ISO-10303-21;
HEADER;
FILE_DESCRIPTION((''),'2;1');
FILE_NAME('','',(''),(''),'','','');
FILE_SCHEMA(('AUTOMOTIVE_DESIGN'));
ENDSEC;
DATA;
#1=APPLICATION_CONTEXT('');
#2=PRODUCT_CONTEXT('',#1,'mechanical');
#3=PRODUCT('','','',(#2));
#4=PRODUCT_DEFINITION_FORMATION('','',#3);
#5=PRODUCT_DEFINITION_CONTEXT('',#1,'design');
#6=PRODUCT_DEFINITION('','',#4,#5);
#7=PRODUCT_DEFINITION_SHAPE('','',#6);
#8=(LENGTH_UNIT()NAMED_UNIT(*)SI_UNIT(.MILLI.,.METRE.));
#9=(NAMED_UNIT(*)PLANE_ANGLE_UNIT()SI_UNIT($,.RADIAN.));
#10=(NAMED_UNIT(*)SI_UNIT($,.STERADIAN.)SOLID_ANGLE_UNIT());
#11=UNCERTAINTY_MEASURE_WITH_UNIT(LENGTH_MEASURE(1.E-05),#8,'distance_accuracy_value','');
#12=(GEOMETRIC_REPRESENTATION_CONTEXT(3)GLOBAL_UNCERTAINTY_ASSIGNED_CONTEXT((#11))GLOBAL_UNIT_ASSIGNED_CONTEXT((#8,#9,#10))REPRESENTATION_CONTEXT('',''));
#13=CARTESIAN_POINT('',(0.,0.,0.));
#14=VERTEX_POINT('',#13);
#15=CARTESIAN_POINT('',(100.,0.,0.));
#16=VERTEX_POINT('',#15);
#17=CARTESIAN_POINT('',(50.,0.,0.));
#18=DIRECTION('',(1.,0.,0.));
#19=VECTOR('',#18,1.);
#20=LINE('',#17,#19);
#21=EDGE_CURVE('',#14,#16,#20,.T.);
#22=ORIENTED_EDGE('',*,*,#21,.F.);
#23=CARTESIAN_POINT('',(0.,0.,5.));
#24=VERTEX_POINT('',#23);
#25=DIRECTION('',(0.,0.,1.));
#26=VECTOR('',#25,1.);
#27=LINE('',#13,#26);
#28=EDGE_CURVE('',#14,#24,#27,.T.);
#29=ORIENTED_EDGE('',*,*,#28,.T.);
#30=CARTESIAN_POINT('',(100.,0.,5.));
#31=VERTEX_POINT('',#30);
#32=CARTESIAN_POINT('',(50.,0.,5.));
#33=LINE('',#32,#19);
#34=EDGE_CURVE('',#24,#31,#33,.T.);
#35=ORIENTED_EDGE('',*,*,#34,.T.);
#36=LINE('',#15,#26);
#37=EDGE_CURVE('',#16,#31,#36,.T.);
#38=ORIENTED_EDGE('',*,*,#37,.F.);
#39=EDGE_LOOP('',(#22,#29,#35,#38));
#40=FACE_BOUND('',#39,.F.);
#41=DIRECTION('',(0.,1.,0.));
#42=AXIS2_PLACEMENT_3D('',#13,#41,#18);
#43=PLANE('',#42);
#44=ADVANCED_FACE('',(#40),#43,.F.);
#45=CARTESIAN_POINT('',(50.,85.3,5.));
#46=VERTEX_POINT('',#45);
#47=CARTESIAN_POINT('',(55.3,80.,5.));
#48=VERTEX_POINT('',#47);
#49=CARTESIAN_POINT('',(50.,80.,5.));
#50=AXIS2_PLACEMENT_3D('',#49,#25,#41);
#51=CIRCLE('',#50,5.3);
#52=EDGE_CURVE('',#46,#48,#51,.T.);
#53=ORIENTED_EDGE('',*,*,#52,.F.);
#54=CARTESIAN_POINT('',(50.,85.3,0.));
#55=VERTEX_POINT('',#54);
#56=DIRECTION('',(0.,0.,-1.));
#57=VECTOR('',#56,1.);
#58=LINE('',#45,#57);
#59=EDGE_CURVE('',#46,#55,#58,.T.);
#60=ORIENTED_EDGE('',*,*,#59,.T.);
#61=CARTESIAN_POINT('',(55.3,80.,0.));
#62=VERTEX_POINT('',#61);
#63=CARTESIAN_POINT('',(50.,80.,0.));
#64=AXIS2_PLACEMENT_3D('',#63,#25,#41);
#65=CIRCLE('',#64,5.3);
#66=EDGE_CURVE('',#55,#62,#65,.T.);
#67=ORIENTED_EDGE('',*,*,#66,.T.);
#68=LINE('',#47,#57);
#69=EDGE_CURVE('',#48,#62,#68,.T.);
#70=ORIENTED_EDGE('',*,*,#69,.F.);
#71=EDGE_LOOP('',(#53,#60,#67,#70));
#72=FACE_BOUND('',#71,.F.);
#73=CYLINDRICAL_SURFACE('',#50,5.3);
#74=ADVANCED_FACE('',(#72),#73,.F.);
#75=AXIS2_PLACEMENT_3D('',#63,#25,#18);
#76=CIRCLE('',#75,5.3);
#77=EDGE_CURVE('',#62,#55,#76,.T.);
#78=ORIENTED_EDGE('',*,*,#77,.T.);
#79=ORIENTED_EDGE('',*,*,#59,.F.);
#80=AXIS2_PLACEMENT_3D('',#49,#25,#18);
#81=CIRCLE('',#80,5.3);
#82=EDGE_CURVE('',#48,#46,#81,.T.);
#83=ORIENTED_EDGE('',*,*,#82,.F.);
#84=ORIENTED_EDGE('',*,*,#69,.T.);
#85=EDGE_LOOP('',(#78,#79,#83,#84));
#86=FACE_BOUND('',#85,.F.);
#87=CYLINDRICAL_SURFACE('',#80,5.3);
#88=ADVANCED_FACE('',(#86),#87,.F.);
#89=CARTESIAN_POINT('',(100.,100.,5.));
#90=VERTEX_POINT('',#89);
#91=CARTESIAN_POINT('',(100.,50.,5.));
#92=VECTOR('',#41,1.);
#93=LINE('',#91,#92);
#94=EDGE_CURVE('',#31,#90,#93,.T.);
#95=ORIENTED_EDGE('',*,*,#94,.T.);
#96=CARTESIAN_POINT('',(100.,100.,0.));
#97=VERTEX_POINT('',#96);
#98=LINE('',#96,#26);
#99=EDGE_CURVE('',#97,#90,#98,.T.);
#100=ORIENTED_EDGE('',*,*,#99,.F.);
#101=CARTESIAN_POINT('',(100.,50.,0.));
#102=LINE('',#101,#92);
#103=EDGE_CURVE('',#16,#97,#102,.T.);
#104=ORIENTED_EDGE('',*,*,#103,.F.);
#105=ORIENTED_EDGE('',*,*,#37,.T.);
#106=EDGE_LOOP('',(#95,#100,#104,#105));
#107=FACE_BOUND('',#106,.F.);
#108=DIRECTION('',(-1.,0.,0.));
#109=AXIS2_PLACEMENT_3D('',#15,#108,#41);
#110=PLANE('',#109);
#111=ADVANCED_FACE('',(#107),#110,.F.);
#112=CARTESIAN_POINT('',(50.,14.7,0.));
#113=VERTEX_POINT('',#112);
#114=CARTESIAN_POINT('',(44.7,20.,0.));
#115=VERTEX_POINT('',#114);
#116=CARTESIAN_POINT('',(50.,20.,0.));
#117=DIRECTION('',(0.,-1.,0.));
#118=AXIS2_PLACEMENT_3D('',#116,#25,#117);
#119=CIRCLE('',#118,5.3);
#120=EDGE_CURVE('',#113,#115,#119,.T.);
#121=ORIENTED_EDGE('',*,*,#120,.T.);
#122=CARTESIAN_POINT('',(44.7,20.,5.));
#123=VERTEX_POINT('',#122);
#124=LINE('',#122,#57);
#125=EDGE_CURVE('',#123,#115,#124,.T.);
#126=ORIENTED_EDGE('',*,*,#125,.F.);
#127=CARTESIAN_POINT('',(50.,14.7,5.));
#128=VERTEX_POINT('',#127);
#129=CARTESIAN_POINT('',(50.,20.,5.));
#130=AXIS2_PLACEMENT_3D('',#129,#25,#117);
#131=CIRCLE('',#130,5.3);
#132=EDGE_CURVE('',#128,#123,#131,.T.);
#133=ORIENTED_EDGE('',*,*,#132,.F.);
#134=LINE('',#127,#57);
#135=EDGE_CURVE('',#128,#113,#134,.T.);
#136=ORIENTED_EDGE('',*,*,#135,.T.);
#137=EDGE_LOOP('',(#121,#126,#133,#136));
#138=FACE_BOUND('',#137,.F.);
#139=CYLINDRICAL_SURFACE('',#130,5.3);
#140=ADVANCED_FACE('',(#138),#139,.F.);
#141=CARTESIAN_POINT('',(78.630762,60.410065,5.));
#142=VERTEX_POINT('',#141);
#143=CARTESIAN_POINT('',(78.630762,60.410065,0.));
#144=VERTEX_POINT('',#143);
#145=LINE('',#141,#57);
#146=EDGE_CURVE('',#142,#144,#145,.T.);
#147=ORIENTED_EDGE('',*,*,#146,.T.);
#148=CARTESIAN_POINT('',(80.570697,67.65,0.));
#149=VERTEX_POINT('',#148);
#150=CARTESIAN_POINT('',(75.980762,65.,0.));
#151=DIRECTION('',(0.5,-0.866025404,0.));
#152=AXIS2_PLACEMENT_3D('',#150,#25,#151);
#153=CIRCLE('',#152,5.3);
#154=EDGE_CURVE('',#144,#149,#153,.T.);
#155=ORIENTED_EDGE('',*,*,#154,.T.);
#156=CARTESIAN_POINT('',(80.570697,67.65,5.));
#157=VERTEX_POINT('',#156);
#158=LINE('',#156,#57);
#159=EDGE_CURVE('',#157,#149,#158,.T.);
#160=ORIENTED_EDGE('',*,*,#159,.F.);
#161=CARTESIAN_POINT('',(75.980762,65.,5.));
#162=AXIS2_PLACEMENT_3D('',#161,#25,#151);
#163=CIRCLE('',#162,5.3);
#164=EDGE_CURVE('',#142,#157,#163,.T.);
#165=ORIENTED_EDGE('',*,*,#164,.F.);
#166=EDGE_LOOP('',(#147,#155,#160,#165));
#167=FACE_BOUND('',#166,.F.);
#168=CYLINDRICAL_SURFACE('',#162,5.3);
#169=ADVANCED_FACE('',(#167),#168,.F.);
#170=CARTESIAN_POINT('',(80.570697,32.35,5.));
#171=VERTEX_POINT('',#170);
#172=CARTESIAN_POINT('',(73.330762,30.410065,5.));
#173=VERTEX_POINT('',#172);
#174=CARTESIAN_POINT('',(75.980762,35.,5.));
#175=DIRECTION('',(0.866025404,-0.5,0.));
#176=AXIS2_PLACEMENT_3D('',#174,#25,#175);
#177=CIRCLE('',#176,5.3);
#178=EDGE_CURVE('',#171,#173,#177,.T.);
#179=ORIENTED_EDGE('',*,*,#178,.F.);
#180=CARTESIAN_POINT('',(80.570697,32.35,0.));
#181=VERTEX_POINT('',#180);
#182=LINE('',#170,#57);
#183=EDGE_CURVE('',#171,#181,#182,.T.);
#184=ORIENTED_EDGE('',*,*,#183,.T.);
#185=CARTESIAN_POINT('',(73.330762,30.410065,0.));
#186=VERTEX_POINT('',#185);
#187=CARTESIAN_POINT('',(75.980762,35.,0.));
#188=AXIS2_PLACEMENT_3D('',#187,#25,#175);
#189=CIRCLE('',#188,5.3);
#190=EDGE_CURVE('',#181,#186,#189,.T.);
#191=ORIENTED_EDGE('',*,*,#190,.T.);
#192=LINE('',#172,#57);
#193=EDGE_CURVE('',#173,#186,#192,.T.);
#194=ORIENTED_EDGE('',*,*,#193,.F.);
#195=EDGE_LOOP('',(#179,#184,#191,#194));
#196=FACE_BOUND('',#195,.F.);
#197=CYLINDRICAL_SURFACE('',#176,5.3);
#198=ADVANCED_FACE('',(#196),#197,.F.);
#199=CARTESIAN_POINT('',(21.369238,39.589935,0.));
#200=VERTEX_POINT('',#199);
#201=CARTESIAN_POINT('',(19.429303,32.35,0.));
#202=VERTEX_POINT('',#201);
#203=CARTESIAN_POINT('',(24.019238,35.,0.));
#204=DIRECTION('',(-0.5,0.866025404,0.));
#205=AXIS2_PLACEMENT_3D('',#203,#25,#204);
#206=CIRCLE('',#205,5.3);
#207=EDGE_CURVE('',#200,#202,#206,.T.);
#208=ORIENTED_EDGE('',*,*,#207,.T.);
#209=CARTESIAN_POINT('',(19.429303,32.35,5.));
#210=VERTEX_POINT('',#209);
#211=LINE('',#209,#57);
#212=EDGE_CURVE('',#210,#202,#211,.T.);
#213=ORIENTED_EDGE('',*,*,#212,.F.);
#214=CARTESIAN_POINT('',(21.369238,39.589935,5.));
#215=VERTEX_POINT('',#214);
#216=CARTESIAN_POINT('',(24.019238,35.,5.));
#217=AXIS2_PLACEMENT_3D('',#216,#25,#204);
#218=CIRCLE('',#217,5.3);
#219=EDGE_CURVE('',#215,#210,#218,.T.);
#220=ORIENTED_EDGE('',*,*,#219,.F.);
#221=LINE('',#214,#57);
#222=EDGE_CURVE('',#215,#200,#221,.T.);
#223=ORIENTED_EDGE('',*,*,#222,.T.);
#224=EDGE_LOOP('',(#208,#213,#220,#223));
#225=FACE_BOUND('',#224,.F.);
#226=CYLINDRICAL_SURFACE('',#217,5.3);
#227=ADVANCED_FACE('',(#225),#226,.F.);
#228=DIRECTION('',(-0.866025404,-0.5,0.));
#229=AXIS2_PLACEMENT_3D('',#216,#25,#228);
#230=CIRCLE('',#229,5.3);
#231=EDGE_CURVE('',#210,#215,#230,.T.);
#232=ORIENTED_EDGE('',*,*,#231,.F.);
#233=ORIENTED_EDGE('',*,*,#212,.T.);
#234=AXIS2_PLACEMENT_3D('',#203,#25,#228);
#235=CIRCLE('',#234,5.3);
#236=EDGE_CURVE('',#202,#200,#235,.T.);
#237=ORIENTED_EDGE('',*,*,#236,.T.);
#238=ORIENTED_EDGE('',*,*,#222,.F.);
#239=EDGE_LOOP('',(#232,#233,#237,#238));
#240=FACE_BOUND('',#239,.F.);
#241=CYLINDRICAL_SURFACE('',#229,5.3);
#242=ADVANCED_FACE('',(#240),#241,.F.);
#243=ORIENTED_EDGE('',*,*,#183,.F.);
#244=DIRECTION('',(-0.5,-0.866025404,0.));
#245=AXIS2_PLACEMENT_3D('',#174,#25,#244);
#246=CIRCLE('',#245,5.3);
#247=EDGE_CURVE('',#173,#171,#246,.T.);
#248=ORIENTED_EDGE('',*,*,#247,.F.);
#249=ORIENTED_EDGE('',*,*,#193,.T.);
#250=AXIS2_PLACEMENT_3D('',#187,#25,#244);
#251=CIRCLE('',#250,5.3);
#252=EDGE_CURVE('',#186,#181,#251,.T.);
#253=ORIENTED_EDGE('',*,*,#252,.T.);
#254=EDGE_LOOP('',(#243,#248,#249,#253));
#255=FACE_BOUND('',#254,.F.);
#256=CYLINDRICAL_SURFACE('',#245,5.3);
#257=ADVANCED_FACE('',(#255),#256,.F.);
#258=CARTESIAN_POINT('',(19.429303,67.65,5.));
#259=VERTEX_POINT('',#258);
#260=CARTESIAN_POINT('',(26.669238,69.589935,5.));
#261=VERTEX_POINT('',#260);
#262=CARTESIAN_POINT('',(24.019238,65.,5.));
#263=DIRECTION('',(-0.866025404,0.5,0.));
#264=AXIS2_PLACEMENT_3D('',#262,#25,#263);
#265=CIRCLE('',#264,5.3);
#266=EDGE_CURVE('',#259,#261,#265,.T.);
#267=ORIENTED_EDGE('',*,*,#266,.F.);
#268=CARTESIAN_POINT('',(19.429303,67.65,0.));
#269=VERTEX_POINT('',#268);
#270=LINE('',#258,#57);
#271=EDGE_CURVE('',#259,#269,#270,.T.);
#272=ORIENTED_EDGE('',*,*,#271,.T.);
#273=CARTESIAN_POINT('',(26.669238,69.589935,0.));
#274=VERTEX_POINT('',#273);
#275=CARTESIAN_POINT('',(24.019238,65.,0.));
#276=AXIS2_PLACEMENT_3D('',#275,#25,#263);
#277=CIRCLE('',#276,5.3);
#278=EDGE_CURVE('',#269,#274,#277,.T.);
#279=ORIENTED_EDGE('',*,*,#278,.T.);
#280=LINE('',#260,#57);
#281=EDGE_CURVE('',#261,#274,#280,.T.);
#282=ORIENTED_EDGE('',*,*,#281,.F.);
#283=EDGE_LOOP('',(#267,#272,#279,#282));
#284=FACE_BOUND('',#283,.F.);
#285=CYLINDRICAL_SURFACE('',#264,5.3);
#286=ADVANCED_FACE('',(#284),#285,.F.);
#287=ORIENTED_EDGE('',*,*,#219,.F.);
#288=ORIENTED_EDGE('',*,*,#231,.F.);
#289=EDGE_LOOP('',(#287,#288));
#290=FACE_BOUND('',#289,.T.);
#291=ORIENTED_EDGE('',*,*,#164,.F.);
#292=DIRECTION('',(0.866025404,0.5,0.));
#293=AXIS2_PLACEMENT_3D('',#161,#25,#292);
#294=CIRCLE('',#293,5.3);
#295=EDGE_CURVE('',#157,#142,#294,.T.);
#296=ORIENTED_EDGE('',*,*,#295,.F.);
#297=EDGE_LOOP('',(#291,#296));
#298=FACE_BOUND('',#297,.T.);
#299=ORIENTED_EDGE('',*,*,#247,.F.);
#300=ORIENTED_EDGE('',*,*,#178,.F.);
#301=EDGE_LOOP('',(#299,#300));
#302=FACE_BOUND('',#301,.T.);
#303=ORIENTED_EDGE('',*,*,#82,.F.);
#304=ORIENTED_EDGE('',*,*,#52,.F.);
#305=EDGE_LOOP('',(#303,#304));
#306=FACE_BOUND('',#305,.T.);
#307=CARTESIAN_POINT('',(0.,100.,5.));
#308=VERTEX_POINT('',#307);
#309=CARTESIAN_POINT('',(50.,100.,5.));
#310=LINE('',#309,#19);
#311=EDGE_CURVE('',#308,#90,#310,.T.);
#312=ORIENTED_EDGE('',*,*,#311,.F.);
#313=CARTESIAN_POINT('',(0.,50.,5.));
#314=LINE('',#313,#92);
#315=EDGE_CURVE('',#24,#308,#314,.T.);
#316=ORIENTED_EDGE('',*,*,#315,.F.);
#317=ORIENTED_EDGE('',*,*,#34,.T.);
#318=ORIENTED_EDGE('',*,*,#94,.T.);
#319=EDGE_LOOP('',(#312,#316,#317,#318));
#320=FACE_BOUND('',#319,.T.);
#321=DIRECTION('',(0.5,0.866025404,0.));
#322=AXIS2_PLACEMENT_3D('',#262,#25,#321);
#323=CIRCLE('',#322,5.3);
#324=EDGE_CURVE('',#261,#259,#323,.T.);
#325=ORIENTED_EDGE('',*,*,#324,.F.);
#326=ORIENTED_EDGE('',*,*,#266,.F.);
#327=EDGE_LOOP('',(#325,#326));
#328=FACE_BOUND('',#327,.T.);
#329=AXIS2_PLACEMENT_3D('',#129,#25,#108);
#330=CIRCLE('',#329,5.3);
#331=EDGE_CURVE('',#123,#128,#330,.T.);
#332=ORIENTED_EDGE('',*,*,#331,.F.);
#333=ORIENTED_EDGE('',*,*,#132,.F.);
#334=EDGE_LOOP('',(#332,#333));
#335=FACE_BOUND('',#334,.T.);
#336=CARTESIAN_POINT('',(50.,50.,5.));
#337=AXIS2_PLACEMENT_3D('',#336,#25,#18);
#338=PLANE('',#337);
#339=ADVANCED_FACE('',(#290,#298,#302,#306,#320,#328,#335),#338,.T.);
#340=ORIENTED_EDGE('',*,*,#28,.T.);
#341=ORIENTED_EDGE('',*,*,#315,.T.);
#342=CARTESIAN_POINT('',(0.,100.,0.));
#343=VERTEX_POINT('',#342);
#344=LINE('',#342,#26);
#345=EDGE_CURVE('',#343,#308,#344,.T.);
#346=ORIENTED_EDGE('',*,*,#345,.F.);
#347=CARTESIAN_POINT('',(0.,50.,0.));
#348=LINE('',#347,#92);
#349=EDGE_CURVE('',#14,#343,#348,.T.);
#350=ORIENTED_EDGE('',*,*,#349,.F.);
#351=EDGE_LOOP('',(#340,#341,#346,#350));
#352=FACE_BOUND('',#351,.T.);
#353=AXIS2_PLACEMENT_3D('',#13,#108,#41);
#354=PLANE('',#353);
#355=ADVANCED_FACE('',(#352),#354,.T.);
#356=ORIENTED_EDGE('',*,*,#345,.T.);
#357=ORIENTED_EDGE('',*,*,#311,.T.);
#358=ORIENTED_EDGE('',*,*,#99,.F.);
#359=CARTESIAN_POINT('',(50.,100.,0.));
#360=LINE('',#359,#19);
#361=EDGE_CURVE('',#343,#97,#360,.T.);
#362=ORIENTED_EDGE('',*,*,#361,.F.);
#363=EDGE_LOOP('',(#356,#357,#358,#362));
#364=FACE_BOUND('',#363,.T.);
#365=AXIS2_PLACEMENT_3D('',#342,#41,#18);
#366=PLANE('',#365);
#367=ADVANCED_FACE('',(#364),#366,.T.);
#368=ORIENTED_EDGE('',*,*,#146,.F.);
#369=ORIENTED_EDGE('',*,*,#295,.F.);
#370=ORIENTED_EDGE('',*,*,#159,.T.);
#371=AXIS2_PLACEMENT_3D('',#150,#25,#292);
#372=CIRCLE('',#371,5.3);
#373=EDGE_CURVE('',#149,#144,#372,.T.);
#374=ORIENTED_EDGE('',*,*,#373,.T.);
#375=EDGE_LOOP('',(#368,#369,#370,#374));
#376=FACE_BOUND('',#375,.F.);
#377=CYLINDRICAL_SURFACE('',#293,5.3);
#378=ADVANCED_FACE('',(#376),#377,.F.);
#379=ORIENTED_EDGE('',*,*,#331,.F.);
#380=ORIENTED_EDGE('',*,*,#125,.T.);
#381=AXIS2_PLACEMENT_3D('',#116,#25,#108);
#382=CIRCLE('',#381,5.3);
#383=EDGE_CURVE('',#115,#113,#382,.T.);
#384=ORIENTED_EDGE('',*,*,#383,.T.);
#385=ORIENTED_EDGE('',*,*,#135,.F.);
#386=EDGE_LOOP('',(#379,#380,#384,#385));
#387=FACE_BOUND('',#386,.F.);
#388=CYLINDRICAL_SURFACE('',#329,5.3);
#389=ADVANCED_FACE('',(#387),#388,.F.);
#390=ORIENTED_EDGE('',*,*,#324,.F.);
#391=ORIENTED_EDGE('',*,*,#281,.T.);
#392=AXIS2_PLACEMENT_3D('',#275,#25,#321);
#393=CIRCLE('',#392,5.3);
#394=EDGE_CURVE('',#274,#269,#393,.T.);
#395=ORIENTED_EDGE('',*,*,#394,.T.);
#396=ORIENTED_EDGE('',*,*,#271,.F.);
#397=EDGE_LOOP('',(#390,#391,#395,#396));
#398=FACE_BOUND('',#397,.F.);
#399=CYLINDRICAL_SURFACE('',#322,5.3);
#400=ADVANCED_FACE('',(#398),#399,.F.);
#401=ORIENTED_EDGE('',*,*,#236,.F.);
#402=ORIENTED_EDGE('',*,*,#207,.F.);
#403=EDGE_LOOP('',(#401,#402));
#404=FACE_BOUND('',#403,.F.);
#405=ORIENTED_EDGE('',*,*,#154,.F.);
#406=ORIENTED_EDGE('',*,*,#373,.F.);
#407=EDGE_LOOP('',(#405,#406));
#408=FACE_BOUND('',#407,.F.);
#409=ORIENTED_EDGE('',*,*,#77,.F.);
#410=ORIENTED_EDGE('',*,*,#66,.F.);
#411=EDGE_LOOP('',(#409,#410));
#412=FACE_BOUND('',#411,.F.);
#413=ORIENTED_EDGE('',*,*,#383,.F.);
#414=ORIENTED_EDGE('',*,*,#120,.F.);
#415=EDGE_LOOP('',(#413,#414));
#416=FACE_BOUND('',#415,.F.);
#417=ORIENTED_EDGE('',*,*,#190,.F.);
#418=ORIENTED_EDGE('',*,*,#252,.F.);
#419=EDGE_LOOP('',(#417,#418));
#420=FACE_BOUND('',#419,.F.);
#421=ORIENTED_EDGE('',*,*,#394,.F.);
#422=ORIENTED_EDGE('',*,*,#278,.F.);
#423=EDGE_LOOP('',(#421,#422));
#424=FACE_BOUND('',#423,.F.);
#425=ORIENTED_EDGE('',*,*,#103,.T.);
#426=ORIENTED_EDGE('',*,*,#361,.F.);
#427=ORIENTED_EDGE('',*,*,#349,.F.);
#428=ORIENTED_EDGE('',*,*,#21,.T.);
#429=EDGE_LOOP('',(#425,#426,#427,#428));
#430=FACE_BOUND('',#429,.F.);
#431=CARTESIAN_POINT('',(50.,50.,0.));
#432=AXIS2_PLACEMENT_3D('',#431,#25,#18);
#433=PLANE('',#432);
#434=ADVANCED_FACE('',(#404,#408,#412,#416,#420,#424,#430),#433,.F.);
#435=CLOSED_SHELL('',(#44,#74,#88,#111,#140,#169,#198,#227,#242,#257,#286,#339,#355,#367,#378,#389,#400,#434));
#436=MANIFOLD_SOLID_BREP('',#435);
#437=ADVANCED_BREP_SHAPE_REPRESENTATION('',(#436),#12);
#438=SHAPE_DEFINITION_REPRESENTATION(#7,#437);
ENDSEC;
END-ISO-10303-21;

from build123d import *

# Parameters (mm, degrees)
F0_W            = 100
F0_H            = 100
F1_DEPTH        = 5
F3_DEPTH        = 25
F3_COPIES_COUNT = 6


# Not quite as in the source:
# - a pattern or mirror of a feature is missing from the dataset's text; its kind, count and spacing are read off the source's solid


with BuildPart() as f1:
    # F0 (on Top) → F1 (new body)
    with BuildSketch(Plane.XY):
        with Locations((50, 50)):
            Rectangle(F0_W, F0_H)
    extrude(amount=F1_DEPTH)

    # F2 (on face) → F3 (cut)
    with BuildSketch(Plane.XY.offset(5)):
        with BuildLine():
            ThreePointArc((50, 85.3), (46.2523340597, 76.2523340597), (55.3, 80))
            ThreePointArc((55.3, 80), (53.7476659403, 83.7476659403), (50, 85.3))
        make_face()
    f3 = extrude(amount=-F3_DEPTH, mode=Mode.SUBTRACT)

    # F3_copies: F3 ×6 about axis
    f3_copies_axis = Axis((50, 50, 0), (0, 0, 1))
    for i in range(1, F3_COPIES_COUNT):
        add(f3.rotate(f3_copies_axis, i * 360 / F3_COPIES_COUNT), mode=Mode.SUBTRACT)


solid = f1.part
